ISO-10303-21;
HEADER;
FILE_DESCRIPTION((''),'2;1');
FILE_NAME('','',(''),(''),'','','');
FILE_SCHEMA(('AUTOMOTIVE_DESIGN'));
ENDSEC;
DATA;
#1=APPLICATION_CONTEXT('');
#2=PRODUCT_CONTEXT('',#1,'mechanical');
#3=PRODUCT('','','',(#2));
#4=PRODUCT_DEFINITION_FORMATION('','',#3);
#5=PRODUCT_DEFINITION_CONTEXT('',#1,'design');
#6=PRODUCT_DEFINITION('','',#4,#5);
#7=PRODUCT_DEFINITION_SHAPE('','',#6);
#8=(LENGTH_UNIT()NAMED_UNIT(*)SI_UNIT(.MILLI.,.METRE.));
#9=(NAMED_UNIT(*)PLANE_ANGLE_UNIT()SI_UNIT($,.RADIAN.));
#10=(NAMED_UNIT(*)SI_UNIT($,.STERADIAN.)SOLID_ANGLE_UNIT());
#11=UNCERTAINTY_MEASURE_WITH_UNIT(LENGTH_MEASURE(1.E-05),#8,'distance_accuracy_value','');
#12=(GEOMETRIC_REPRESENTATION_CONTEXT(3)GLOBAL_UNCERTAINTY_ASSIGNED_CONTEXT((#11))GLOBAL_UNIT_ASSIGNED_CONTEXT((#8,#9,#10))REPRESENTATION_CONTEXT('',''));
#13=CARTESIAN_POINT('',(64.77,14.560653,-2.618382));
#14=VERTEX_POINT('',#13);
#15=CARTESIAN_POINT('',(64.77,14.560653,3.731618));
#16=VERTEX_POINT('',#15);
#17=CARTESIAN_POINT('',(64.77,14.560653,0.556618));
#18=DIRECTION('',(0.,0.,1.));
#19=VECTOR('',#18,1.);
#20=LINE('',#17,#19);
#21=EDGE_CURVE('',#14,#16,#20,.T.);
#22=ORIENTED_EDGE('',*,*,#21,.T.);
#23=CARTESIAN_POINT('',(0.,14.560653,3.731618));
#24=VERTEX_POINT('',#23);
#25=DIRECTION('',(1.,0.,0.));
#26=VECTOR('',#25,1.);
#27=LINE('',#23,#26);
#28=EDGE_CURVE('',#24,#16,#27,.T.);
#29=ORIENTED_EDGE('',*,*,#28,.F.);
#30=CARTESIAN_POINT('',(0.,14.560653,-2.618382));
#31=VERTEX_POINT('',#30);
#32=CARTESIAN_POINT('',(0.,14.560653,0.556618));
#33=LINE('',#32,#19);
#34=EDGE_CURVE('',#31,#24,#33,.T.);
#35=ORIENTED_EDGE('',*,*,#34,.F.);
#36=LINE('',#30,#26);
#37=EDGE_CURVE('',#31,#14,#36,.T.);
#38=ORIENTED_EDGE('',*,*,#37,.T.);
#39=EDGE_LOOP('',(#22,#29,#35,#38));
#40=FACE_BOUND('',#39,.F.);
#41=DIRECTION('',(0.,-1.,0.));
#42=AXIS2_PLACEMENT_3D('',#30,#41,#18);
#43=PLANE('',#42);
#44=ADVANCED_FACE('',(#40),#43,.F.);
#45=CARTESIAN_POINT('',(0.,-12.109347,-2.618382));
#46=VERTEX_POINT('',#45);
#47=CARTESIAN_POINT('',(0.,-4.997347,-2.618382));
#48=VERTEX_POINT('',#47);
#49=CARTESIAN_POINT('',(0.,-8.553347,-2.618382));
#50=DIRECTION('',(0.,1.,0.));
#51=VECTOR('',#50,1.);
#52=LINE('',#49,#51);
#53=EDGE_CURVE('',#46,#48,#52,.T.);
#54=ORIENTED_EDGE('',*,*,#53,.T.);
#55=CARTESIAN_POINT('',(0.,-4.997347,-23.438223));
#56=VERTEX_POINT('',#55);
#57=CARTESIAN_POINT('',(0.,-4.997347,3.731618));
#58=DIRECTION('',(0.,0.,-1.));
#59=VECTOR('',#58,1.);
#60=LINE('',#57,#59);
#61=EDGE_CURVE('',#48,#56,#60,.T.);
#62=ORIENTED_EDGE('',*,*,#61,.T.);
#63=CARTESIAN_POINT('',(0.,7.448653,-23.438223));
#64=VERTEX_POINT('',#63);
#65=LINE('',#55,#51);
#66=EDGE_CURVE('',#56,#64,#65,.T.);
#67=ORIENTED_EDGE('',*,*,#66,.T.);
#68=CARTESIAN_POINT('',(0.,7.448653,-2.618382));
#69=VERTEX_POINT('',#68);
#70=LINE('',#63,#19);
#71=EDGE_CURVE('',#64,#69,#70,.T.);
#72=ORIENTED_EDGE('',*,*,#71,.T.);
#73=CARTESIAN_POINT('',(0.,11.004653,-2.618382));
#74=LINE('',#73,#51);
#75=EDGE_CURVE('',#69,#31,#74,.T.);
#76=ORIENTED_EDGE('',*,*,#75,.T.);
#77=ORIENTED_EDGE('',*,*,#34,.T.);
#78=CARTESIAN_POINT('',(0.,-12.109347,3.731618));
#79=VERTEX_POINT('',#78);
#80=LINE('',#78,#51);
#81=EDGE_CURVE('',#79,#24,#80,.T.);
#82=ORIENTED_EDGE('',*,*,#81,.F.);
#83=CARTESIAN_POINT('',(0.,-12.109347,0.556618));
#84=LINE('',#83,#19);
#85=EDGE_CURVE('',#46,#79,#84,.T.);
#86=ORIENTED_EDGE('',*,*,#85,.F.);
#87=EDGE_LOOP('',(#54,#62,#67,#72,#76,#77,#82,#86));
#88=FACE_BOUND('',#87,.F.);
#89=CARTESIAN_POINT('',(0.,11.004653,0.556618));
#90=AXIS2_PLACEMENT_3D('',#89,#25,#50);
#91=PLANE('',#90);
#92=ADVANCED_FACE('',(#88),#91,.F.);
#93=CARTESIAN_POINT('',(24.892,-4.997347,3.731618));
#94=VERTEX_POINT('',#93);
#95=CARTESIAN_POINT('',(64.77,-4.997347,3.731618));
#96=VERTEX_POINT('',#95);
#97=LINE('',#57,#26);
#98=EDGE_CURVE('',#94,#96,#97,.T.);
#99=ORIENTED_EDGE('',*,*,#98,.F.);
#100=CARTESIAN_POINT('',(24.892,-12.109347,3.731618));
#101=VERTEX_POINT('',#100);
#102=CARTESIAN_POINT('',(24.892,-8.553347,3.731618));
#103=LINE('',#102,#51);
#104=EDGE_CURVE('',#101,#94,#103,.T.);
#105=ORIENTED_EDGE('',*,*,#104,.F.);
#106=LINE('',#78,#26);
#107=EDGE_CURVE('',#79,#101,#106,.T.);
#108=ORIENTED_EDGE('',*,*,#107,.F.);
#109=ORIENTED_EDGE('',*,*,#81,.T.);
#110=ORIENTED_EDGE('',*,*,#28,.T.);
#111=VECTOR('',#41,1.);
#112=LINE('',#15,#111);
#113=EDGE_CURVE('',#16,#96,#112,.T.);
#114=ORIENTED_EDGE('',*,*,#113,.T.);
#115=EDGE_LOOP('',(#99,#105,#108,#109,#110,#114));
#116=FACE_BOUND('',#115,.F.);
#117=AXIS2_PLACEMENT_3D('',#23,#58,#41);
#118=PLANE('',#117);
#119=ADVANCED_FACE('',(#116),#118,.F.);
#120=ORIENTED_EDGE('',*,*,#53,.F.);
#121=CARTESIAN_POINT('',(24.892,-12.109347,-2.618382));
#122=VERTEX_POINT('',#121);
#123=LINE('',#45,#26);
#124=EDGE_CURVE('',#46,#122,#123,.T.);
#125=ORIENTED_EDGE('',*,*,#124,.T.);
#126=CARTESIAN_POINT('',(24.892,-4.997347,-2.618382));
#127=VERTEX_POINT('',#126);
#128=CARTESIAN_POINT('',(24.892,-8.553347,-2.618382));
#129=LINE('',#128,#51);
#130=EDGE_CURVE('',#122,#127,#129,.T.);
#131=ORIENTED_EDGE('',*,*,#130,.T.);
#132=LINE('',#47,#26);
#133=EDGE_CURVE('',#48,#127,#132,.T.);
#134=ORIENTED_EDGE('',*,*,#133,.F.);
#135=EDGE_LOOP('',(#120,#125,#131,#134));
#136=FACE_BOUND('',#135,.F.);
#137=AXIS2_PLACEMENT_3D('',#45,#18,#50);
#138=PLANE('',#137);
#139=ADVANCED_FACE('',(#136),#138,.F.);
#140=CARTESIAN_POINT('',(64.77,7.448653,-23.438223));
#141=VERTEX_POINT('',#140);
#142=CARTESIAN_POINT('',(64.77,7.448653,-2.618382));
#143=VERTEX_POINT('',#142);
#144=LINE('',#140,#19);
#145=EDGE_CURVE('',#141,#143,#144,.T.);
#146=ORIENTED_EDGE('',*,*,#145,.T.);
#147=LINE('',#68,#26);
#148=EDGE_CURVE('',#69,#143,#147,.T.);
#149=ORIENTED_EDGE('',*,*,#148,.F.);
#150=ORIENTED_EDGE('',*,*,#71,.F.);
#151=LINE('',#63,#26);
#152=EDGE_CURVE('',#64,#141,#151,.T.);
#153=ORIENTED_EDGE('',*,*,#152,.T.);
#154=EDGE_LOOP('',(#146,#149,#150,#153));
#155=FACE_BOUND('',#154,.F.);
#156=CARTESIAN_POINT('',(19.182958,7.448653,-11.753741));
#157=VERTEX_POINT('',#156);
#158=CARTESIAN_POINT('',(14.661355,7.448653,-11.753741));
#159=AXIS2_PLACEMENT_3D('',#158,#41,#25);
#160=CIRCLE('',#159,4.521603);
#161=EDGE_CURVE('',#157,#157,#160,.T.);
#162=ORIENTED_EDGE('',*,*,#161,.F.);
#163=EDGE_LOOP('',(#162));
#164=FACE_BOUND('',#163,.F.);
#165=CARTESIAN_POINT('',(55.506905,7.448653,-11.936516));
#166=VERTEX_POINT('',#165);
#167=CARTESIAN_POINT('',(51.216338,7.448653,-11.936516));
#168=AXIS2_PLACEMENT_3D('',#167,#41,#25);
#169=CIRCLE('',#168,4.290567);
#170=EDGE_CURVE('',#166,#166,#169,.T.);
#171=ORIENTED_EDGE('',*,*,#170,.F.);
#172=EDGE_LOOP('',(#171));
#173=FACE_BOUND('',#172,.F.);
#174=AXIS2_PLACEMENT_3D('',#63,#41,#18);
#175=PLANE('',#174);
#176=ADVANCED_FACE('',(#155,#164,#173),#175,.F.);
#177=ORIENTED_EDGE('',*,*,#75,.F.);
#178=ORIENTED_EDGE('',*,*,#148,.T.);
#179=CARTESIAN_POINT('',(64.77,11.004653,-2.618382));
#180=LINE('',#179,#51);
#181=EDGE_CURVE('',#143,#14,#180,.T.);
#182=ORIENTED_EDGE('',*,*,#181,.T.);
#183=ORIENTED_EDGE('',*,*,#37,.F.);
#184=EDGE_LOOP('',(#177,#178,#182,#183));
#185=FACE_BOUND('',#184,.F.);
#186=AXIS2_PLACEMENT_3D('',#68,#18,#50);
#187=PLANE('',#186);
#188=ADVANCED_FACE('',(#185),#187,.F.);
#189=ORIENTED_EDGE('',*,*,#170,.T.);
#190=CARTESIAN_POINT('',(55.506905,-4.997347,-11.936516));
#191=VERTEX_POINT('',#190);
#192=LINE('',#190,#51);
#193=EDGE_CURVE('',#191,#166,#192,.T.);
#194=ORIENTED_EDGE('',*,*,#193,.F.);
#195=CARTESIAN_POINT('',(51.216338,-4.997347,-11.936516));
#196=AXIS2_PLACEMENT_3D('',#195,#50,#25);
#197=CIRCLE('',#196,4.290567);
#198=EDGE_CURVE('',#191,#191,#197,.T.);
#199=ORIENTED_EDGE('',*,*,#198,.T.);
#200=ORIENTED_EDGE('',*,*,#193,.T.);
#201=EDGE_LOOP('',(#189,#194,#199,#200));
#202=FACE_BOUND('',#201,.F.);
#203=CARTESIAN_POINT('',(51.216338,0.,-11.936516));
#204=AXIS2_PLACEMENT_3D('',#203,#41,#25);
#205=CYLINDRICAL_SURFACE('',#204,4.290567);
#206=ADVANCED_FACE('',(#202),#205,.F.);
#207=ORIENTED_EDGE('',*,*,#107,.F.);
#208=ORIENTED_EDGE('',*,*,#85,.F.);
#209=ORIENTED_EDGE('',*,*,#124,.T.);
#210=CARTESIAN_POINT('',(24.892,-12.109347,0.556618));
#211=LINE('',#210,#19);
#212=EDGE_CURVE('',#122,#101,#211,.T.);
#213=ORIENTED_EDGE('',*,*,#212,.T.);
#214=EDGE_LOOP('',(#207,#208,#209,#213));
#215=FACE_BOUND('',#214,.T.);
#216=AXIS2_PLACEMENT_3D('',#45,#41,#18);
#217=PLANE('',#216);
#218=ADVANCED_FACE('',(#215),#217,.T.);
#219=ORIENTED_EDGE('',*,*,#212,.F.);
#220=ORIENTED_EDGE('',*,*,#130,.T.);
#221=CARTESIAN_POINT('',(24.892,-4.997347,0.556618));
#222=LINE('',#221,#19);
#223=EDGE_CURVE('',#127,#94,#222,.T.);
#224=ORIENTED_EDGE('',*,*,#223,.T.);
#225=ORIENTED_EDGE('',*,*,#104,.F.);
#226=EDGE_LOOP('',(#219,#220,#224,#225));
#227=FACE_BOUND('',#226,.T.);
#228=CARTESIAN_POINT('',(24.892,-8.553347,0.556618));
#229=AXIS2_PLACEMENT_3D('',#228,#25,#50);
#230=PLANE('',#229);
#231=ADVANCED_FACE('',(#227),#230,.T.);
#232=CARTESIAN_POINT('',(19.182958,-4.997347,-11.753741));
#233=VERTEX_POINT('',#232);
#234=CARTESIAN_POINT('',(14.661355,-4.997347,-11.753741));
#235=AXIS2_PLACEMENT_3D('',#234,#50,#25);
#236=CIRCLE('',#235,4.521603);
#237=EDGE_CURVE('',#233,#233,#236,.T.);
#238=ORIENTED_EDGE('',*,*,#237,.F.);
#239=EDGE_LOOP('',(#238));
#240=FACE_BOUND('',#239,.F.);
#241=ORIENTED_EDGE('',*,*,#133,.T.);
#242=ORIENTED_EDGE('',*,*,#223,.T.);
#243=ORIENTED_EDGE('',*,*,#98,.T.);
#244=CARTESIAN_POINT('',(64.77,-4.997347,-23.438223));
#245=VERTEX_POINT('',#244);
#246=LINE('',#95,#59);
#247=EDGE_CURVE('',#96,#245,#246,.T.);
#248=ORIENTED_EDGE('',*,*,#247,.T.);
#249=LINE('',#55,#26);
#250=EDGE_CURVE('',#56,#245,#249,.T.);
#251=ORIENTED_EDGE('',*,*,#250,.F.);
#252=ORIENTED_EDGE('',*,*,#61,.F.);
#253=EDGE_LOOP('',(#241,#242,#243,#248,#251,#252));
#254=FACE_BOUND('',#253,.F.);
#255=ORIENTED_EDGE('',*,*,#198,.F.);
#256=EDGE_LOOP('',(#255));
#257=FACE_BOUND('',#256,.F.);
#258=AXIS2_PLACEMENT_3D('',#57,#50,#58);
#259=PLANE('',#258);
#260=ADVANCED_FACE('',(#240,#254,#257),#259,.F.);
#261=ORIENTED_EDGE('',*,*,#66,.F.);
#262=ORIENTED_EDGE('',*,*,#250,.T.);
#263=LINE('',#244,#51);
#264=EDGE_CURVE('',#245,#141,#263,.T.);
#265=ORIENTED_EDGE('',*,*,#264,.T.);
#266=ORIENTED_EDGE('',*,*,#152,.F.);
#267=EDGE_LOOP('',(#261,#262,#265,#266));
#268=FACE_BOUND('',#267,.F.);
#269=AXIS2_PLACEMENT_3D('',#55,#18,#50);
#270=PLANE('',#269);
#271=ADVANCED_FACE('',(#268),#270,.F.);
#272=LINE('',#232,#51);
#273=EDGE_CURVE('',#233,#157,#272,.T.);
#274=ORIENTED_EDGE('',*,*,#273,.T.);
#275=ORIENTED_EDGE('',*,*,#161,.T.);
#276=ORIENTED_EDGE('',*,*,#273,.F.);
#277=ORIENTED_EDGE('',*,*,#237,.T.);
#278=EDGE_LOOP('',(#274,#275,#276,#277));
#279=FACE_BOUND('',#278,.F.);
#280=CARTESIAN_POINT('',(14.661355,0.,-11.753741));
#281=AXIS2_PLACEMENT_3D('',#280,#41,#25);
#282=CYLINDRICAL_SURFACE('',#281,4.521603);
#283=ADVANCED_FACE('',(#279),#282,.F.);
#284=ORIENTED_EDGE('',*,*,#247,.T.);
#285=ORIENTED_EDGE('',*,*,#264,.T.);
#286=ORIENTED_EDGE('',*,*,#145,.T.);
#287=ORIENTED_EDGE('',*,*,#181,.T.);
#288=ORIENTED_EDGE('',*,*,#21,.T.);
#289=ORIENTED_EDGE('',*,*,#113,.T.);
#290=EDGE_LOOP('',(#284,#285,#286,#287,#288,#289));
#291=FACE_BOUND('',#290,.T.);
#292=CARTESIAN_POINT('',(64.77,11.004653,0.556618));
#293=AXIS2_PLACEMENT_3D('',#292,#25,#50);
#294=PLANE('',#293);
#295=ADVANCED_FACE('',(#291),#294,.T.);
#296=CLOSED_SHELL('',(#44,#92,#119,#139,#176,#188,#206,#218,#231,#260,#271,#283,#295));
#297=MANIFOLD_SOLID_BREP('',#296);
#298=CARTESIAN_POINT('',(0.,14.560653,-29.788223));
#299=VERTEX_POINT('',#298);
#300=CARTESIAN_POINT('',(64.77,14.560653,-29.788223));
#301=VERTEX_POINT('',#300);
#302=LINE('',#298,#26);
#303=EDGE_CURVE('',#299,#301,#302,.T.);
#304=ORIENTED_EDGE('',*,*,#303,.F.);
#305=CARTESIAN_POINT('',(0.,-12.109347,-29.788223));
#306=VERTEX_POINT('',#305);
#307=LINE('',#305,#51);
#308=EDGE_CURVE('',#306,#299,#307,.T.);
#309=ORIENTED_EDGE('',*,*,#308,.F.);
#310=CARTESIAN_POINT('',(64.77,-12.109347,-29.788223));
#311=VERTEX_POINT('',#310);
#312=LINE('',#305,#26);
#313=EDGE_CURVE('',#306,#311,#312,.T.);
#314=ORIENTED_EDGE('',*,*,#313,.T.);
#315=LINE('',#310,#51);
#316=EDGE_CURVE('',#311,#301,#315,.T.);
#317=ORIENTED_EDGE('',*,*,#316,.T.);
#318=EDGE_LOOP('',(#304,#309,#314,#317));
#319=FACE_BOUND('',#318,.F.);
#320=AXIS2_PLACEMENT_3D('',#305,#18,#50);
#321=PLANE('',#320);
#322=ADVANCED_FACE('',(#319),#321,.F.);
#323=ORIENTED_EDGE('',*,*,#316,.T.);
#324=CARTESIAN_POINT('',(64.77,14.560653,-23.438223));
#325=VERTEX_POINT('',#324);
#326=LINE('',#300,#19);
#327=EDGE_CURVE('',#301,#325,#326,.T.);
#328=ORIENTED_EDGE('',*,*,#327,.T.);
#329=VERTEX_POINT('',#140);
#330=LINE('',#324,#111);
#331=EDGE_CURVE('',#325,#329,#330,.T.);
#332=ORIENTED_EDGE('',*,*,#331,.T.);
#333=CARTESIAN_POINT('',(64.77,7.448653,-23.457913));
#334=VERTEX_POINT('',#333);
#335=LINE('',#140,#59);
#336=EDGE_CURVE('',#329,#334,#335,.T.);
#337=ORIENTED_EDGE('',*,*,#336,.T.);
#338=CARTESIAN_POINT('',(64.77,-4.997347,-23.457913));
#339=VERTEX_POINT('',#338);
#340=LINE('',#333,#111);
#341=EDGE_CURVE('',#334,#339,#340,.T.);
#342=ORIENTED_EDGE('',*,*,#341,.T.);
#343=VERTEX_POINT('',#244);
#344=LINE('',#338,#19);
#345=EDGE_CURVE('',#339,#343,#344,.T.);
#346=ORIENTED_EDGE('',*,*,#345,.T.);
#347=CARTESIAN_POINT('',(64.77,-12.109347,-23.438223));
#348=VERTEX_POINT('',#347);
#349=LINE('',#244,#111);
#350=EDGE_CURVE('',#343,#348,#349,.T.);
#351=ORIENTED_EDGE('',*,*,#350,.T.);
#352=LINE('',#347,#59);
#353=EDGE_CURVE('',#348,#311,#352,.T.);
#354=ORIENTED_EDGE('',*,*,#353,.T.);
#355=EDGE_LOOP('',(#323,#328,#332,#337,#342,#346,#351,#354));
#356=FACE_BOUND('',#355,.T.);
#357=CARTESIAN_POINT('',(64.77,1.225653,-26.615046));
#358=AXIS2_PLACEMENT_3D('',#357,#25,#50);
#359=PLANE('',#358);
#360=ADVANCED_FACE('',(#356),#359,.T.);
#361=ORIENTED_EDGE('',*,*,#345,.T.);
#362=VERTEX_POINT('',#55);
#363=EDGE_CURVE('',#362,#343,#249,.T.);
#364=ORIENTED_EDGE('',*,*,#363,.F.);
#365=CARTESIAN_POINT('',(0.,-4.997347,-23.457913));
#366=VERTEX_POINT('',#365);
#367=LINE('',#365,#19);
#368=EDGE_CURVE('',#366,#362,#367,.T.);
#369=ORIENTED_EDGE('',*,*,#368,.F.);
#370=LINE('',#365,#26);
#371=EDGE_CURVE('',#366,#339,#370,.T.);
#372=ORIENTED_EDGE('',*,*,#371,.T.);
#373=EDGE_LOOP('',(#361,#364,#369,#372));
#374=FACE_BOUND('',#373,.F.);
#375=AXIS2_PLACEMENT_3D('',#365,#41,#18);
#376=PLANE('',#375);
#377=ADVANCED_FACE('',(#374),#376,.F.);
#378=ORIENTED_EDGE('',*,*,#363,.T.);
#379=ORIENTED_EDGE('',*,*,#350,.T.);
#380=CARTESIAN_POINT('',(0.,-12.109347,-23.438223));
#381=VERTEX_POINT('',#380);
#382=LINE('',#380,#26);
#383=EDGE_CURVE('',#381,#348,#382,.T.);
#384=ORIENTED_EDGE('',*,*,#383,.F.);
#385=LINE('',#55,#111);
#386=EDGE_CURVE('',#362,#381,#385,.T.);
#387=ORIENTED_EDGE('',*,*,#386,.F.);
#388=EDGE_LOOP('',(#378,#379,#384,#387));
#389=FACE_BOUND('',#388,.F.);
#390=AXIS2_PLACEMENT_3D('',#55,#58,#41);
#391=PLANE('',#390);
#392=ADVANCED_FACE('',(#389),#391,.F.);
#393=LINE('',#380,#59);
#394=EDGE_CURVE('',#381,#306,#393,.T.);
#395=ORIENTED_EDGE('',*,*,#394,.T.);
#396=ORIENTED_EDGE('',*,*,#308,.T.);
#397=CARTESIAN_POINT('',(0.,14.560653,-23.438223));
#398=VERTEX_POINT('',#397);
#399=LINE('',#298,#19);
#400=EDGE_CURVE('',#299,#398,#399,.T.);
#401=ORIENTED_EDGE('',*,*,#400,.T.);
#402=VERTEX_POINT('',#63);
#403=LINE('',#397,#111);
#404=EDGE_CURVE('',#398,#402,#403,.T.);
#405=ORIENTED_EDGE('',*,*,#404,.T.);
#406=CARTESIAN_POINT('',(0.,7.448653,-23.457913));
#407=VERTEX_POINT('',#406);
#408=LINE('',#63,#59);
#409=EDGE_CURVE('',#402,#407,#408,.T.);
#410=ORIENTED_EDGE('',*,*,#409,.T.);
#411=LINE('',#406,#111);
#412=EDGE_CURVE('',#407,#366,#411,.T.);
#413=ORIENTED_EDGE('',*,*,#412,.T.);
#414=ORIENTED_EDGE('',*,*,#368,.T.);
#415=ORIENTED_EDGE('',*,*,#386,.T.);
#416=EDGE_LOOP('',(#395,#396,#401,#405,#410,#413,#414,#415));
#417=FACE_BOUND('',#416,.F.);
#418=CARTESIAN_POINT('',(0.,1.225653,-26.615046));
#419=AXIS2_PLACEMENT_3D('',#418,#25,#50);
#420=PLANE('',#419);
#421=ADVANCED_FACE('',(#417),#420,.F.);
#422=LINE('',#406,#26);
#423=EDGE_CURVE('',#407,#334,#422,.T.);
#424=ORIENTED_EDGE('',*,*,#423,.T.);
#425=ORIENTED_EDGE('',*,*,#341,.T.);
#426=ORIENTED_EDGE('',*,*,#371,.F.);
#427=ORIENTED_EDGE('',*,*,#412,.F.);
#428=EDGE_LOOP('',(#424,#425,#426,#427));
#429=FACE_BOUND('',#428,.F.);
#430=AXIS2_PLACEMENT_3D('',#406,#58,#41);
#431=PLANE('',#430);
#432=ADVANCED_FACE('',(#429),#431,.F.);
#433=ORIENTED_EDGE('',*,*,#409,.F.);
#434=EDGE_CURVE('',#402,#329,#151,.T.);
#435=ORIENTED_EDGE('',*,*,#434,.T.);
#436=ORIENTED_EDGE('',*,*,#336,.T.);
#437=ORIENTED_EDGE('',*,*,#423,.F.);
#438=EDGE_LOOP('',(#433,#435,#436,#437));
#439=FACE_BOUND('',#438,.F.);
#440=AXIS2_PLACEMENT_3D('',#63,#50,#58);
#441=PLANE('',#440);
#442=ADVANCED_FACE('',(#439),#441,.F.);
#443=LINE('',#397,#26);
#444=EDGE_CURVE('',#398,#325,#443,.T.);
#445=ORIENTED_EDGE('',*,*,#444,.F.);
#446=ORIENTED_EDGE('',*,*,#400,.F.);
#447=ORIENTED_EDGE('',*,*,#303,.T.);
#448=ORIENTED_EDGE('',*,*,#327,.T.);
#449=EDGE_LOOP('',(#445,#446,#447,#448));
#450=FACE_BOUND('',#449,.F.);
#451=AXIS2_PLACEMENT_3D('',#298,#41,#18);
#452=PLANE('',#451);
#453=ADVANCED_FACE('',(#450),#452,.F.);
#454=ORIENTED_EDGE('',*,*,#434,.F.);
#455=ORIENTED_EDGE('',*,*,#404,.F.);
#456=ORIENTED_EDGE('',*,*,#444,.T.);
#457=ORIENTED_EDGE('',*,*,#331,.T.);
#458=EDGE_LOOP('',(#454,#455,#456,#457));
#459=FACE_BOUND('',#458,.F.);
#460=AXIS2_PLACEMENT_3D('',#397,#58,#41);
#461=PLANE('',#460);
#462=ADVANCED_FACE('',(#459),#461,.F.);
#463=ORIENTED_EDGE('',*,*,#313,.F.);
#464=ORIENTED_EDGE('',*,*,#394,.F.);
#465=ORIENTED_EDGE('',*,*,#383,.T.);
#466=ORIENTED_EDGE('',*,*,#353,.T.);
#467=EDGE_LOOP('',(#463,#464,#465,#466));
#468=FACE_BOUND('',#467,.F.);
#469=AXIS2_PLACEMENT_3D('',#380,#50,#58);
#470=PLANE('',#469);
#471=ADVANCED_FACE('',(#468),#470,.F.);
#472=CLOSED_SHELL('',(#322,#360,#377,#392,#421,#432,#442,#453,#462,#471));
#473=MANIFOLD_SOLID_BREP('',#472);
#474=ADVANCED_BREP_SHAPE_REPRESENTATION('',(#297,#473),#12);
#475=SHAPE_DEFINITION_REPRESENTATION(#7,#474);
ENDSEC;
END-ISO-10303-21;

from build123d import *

# Parameters (mm, degrees)
F0_W          = 7.112
F0_H          = 6.35
F1_DEPTH      = 24.892
F3_DEPTH      = 64.77
F4_R          = 4.5216032169
F4_R_2        = 4.2905673548
F5_DEPTH      = 122.428
F5_DEPTH_BACK = 71.628


# Not quite as in the source:
# - a feature of the source that left no trace in its solid (it failed there, or was rolled back) is left out


with BuildPart() as f1:
    # F0 (on Right) → F1 (new body)
    with BuildSketch(Plane.YZ):
        with Locations((-8.5533469116, 0.5566177108)):
            Rectangle(F0_W, F0_H)
    extrude(amount=F1_DEPTH)

    # F0 (on Right) → F3 (join)
    with BuildSketch(Plane.YZ):
        with Locations((11.0046530884, 0.5566177108)):
            Rectangle(F0_W, F0_H)
        Polygon((7.4486530884, 3.7316177108), (-4.9973469116, 3.7316177108), (-4.9973469116, -2.6183822892), (-4.9973469116, -23.4382234705), (7.4486530884, -23.4382234705), (7.4486530884, -2.6183822892), align=None)
    extrude(amount=F3_DEPTH)

    # F4 (on Front) → F5 (cut, two sides)
    with BuildSketch(Plane.XZ) as f5_sk:
        with Locations((14.6613549441, -11.7537407205)):
            Circle(F4_R)
        with Locations((51.2163378298, -11.9365155697)):
            Circle(F4_R_2)
    extrude(amount=F5_DEPTH, mode=Mode.SUBTRACT)
    extrude(f5_sk.sketch, amount=-F5_DEPTH_BACK, mode=Mode.SUBTRACT)


with BuildPart() as f3:
    # F0 (on Right) → F3, piece 2 (new body)
    with BuildSketch(Plane.YZ):
        Polygon((-4.9973469116, -23.457913017), (-4.9973469116, -23.4382234705), (-12.1093469116, -23.4382234705), (-12.1093469116, -29.7882234705), (14.5606530884, -29.7882234705), (14.5606530884, -23.4382234705), (7.4486530884, -23.4382234705), (7.4486530884, -23.457913017), align=None)
    extrude(amount=F3_DEPTH)


solid = Compound([f1.part, f3.part])
